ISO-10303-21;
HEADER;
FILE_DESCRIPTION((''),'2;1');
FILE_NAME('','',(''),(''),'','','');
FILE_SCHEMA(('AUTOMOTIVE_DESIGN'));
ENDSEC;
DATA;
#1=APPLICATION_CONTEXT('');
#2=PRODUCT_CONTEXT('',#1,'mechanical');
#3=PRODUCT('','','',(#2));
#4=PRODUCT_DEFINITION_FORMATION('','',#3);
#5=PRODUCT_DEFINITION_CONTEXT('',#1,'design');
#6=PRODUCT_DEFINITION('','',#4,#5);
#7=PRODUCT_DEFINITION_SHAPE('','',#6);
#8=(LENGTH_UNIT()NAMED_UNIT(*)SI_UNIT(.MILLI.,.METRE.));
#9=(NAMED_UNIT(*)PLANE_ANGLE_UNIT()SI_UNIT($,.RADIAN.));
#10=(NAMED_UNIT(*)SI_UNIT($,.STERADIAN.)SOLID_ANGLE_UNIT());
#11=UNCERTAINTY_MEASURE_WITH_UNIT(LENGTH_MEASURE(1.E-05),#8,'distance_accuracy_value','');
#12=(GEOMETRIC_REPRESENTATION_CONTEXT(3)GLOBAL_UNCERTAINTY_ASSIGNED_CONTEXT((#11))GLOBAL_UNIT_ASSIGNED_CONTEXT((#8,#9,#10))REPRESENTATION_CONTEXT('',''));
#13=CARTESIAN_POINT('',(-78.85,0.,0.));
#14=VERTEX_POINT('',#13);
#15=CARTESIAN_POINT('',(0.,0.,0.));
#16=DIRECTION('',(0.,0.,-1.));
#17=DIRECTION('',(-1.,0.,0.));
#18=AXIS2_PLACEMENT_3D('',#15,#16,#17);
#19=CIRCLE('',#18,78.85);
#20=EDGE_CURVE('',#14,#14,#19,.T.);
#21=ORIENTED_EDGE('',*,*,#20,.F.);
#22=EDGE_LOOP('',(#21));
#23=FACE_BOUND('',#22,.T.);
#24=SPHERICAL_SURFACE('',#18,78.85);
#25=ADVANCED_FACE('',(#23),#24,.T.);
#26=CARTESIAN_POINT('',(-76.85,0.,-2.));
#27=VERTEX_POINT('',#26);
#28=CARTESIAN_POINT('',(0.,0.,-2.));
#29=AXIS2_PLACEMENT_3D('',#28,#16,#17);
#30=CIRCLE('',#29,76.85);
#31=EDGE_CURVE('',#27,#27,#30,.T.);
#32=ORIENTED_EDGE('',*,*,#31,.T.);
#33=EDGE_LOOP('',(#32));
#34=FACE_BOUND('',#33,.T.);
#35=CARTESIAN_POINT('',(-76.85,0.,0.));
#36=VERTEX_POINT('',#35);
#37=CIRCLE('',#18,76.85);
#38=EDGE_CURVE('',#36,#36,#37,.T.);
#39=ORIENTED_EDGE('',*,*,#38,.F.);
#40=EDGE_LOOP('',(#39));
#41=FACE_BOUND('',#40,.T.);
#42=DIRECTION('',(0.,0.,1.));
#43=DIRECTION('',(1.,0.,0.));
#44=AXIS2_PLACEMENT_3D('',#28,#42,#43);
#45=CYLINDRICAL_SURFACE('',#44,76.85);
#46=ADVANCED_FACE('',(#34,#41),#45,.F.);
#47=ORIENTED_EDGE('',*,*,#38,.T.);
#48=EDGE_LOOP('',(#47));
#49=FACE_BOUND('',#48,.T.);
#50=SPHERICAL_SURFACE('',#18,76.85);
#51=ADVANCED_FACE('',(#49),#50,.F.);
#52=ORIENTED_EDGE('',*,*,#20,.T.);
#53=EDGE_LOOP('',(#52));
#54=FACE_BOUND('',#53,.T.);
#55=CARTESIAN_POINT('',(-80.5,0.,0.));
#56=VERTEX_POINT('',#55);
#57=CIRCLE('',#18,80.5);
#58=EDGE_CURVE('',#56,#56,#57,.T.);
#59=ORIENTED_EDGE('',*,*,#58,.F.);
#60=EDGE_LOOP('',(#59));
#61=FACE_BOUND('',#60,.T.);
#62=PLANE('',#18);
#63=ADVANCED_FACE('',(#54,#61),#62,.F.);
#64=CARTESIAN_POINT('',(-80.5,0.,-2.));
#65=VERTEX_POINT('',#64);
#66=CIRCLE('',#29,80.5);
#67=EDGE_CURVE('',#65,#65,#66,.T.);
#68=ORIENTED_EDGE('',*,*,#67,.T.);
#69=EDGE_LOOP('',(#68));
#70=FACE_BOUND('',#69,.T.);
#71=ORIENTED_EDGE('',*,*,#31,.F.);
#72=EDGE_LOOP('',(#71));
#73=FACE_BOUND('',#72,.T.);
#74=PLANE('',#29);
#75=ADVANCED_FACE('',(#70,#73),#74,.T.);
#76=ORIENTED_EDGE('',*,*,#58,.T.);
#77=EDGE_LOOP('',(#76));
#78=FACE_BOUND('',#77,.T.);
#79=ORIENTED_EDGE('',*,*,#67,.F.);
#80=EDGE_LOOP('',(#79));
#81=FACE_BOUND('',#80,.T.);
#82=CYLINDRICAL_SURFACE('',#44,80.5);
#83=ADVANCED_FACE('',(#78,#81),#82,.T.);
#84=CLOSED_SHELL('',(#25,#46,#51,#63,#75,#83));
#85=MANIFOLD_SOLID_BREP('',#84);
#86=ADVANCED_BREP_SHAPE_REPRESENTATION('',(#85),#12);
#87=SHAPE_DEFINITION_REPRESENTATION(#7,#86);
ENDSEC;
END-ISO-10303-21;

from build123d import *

# Parameters (mm, degrees)
SHELL1_T            = -2
SKETCH2_R           = 80.5
SKETCH2_R_2         = 76.85
BOSS_EXTRUDE1_DEPTH = 2


# Read off the part's stored shape, not the designer's step: Revolve1
with BuildPart() as part:
    # Revolve1 outline → Revolve1 (revolve)
    with BuildSketch(Plane.XZ):
        with BuildLine():
            Line((0, 0), (78.85, -7.9e-08))
            ThreePointArc((78.85, -7.9e-08), (55.755369724, 55.755369669), (0, 78.85))
            Line((0, 78.85), (0, 0))
        make_face()
    revolve(axis=Axis((0, 0, 0), (0, 0, 1)))

    # Shell1
    shell1_openings = [part.faces().sort_by_distance(p)[0] for p in [
        (0, 0, 0),
    ]]
    offset(amount=SHELL1_T, openings=shell1_openings, kind=Kind.INTERSECTION)

    # Sketch2 → Boss-Extrude1 (add)
    with BuildSketch(Plane(origin=(0, 0, 0), x_dir=(-1, 0, 0), z_dir=(0, 0, -1))):
        Circle(SKETCH2_R)
        Circle(SKETCH2_R_2, mode=Mode.SUBTRACT)
    extrude(amount=BOSS_EXTRUDE1_DEPTH)


solid = part.part
